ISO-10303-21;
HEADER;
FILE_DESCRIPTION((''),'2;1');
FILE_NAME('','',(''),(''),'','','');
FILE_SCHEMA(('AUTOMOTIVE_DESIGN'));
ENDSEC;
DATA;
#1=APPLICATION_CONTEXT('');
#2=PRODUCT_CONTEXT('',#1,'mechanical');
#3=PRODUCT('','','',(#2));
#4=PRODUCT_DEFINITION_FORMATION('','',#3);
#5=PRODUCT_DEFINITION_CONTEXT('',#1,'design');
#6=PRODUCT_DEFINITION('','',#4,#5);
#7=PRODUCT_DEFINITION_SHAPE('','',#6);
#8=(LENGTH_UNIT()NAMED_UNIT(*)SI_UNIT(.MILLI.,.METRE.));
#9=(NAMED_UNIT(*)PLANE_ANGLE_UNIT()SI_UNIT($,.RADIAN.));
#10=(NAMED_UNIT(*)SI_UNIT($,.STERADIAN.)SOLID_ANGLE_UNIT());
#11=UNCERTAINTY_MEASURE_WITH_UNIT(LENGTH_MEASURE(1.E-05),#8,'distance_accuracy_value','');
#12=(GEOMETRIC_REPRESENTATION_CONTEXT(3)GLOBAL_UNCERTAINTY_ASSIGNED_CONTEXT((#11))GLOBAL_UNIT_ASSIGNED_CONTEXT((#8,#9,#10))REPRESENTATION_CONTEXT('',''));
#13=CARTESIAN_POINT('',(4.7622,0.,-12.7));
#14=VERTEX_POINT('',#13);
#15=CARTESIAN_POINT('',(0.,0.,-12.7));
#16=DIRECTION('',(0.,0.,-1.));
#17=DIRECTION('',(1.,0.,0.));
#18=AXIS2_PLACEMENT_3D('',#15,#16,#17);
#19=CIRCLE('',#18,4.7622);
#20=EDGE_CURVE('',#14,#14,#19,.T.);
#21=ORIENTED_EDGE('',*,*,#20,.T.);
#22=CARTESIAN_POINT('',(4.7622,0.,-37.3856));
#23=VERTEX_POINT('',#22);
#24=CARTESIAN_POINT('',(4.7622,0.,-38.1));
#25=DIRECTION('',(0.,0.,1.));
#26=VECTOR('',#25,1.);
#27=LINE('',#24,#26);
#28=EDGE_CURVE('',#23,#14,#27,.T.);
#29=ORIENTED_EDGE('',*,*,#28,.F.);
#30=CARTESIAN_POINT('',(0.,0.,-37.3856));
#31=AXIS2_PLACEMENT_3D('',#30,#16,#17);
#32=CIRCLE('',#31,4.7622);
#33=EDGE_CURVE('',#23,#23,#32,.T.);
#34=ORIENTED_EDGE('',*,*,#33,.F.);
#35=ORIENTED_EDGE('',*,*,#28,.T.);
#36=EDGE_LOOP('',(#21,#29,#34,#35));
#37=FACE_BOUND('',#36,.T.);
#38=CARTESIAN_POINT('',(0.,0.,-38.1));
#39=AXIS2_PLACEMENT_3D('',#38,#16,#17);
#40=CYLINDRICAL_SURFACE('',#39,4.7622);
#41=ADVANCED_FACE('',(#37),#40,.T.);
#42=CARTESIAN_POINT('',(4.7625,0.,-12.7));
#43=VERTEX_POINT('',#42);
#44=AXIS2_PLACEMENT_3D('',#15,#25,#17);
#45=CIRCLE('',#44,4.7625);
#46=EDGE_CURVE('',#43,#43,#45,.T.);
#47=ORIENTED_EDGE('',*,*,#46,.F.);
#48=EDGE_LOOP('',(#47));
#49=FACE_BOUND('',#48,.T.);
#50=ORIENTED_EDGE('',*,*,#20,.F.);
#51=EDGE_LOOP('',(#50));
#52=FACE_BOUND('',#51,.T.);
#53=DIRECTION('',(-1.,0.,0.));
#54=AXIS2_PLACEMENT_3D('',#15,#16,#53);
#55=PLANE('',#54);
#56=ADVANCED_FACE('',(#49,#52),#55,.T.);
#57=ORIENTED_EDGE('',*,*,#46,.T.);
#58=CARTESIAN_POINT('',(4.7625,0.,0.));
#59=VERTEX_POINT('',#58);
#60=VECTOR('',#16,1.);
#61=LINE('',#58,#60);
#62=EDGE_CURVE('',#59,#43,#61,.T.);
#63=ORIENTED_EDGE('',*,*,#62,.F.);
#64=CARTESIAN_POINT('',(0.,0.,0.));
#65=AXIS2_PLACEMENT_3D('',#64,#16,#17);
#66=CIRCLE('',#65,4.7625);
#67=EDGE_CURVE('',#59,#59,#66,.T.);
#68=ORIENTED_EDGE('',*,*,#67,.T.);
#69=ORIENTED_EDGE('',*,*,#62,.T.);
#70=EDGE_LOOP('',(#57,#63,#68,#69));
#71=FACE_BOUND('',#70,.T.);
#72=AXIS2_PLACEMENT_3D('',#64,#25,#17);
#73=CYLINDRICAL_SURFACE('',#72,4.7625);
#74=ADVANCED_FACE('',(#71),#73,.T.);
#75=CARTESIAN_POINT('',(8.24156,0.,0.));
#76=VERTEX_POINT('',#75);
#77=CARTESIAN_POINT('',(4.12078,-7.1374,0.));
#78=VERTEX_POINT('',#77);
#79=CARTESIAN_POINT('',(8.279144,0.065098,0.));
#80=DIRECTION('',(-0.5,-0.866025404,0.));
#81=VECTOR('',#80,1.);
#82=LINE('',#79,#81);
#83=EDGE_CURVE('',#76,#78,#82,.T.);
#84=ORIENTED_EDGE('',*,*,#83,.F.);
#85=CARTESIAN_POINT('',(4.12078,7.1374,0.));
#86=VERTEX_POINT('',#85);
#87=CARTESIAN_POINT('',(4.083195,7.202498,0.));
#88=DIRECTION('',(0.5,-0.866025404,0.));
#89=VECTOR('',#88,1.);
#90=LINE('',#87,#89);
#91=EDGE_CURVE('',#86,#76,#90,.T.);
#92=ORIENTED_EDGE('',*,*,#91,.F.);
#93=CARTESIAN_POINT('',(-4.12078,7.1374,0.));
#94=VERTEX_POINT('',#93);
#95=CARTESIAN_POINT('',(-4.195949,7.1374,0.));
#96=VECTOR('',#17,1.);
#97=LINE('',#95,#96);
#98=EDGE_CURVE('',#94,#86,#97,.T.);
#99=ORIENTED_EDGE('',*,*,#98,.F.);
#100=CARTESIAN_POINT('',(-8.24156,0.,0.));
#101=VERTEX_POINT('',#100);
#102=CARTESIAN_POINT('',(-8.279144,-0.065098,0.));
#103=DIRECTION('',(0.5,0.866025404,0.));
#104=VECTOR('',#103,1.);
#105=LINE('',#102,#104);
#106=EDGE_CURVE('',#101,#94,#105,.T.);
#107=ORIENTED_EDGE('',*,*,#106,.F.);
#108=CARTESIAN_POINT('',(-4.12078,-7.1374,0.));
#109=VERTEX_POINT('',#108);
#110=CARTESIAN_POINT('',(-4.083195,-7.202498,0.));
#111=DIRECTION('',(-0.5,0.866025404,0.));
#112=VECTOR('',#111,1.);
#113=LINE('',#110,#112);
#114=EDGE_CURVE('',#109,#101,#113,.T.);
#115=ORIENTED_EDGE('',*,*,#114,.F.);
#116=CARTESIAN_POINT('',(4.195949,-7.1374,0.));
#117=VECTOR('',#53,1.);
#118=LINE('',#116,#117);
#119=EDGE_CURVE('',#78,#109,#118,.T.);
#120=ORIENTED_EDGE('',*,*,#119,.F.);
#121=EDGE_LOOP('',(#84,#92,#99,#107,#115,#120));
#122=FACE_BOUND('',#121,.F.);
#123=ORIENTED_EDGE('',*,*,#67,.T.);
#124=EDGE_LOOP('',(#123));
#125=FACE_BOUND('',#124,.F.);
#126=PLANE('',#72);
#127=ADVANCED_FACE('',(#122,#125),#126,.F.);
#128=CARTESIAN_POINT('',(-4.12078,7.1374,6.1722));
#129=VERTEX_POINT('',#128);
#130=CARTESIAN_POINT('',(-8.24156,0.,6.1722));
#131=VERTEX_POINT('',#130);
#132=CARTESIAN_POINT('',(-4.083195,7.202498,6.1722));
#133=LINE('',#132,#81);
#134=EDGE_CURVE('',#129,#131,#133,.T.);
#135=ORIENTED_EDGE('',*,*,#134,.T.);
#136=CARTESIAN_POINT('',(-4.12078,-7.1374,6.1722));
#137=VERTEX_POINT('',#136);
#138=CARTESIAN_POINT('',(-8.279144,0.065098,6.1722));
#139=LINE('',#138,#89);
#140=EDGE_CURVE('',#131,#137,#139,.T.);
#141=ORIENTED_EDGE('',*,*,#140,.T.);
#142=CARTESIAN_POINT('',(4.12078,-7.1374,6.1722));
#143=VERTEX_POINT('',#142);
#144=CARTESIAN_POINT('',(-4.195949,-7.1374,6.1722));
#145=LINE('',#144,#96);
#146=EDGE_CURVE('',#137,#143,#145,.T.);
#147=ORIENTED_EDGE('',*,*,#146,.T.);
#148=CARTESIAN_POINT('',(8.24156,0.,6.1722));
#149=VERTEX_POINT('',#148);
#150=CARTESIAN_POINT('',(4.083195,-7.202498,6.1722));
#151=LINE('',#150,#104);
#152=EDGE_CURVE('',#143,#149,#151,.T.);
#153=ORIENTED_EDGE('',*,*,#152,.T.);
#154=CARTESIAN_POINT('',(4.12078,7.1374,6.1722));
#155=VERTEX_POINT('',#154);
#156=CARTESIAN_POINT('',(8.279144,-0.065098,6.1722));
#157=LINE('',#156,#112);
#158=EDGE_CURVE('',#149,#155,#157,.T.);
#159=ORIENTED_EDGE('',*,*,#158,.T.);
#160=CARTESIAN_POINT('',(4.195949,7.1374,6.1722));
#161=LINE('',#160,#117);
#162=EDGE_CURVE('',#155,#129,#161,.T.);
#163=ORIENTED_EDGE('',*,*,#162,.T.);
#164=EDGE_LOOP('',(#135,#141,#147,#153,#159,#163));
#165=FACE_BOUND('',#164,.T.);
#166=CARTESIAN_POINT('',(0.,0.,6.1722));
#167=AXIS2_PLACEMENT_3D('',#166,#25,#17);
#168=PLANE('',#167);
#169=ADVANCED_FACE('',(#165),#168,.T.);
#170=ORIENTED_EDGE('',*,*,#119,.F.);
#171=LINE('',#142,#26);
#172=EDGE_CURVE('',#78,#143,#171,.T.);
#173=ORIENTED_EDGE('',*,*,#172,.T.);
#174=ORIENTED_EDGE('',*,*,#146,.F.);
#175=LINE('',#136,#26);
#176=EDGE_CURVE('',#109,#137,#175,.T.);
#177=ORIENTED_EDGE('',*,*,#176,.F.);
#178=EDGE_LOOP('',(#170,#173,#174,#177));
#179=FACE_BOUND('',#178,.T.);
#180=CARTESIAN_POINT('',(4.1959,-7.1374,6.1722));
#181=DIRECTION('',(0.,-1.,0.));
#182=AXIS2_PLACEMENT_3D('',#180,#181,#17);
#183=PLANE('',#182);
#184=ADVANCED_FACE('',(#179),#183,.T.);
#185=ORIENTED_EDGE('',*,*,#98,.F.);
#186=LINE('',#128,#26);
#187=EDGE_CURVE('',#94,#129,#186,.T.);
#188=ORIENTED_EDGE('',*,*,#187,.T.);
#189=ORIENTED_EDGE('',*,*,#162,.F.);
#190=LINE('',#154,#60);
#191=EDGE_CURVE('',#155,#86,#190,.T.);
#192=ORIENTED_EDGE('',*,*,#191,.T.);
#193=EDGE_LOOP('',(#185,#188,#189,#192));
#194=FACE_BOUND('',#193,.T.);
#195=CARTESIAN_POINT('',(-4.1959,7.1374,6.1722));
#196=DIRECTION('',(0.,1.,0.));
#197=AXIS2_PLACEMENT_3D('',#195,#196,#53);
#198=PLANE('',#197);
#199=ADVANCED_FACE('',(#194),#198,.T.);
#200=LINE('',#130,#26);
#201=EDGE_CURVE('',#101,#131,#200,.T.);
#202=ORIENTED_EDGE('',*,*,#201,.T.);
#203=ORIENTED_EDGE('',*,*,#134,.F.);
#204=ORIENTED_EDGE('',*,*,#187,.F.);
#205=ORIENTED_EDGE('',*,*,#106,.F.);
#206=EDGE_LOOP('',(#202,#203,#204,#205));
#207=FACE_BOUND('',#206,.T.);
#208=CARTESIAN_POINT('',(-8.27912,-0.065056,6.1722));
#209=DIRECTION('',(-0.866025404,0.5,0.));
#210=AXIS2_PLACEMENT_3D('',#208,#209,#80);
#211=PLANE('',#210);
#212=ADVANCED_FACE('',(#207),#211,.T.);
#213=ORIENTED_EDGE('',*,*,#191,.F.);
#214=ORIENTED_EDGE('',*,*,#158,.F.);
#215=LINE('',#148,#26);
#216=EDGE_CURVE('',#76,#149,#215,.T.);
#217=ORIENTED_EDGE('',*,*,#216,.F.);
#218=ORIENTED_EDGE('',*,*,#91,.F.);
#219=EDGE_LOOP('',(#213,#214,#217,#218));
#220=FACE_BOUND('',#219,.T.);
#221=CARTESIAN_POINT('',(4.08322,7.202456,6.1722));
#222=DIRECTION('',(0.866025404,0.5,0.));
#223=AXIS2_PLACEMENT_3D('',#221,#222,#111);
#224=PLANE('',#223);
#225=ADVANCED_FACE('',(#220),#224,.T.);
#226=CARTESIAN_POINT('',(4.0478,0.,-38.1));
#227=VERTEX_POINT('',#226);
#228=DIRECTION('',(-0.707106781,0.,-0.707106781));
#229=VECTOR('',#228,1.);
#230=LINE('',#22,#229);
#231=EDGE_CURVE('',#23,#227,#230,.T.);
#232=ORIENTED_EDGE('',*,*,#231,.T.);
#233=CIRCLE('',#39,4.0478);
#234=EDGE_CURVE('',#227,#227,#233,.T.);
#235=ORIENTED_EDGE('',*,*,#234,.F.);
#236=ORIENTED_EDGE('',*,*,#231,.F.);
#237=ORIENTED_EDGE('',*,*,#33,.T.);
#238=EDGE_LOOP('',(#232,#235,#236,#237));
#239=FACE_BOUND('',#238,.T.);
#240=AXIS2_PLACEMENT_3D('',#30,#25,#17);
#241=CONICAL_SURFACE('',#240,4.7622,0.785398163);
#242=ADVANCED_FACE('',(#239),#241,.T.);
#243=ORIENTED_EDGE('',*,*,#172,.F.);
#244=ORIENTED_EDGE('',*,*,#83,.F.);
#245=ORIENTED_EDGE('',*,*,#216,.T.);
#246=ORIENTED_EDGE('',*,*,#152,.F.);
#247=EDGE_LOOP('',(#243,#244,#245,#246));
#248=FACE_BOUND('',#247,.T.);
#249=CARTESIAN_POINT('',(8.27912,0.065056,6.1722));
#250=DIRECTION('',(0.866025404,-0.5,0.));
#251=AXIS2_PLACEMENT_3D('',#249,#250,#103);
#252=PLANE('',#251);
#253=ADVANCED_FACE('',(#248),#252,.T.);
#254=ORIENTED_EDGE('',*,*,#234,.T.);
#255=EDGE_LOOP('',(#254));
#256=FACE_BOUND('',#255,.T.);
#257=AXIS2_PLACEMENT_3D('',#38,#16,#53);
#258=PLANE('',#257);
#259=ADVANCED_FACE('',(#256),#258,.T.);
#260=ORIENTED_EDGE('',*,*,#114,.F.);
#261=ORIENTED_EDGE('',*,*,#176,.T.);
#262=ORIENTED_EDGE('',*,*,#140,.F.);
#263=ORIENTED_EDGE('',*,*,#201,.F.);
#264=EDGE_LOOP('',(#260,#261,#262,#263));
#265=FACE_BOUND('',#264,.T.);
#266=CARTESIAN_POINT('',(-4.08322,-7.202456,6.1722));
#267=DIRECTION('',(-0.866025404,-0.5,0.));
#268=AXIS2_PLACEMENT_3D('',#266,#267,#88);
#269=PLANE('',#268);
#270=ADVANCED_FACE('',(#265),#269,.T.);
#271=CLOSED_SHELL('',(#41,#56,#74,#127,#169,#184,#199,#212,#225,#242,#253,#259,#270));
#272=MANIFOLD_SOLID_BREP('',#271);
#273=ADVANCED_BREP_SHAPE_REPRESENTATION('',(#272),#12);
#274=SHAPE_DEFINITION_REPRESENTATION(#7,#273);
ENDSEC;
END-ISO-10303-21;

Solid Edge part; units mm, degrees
sketch "Sketch1" plane through (0, 0, 0) normal (0, 0, 1) x (1, 0, 0)
  circle A0 centre (0, 0) radius 8.2794
  dimension "D1" = 16.5588
extrude "Protrusion1" add sketch "Sketch1" along normal blind 6.1722
sketch "Sketch2" plane through (0, 0, 0) normal (0, 0, -1) x (1, 0, 0)
  circle A0 centre (0, 0) radius 4.7625
extrude "Protrusion2" add sketch "Sketch2" along normal blind 38.1
sketch "Sketch3" plane through (0, 0, -38.1) normal (0, 0, -1) x (1, 0, 0)
  circle A0 centre (0, 0) radius 4.7622
extrude "Cutout1" cut sketch "Sketch3" against normal blind 25.4 flip side to cut
chamfer "Chamfer_1" distance 0.7144 angle 45 1 edges at (-4.7622, 0, -38.1)
sketch "Sketch4" plane through (0, 0, 6.1722) normal (0, 0, 1) x (1, 0, 0)
  line L0 (-4.1959, 7.1374) -> (4.1959, 7.1374)
  dimension "D1" = 14.2748
extrude "Cutout2" cut sketch "Sketch4" against normal up to next material side at (0, 7.1874, 6.1722)
pattern_circular "Pattern1" count 6 over 360 about axis through (0, 0, 6.1722) along (0, 0, 1) of "Cutout2"
properties part number "147291"
